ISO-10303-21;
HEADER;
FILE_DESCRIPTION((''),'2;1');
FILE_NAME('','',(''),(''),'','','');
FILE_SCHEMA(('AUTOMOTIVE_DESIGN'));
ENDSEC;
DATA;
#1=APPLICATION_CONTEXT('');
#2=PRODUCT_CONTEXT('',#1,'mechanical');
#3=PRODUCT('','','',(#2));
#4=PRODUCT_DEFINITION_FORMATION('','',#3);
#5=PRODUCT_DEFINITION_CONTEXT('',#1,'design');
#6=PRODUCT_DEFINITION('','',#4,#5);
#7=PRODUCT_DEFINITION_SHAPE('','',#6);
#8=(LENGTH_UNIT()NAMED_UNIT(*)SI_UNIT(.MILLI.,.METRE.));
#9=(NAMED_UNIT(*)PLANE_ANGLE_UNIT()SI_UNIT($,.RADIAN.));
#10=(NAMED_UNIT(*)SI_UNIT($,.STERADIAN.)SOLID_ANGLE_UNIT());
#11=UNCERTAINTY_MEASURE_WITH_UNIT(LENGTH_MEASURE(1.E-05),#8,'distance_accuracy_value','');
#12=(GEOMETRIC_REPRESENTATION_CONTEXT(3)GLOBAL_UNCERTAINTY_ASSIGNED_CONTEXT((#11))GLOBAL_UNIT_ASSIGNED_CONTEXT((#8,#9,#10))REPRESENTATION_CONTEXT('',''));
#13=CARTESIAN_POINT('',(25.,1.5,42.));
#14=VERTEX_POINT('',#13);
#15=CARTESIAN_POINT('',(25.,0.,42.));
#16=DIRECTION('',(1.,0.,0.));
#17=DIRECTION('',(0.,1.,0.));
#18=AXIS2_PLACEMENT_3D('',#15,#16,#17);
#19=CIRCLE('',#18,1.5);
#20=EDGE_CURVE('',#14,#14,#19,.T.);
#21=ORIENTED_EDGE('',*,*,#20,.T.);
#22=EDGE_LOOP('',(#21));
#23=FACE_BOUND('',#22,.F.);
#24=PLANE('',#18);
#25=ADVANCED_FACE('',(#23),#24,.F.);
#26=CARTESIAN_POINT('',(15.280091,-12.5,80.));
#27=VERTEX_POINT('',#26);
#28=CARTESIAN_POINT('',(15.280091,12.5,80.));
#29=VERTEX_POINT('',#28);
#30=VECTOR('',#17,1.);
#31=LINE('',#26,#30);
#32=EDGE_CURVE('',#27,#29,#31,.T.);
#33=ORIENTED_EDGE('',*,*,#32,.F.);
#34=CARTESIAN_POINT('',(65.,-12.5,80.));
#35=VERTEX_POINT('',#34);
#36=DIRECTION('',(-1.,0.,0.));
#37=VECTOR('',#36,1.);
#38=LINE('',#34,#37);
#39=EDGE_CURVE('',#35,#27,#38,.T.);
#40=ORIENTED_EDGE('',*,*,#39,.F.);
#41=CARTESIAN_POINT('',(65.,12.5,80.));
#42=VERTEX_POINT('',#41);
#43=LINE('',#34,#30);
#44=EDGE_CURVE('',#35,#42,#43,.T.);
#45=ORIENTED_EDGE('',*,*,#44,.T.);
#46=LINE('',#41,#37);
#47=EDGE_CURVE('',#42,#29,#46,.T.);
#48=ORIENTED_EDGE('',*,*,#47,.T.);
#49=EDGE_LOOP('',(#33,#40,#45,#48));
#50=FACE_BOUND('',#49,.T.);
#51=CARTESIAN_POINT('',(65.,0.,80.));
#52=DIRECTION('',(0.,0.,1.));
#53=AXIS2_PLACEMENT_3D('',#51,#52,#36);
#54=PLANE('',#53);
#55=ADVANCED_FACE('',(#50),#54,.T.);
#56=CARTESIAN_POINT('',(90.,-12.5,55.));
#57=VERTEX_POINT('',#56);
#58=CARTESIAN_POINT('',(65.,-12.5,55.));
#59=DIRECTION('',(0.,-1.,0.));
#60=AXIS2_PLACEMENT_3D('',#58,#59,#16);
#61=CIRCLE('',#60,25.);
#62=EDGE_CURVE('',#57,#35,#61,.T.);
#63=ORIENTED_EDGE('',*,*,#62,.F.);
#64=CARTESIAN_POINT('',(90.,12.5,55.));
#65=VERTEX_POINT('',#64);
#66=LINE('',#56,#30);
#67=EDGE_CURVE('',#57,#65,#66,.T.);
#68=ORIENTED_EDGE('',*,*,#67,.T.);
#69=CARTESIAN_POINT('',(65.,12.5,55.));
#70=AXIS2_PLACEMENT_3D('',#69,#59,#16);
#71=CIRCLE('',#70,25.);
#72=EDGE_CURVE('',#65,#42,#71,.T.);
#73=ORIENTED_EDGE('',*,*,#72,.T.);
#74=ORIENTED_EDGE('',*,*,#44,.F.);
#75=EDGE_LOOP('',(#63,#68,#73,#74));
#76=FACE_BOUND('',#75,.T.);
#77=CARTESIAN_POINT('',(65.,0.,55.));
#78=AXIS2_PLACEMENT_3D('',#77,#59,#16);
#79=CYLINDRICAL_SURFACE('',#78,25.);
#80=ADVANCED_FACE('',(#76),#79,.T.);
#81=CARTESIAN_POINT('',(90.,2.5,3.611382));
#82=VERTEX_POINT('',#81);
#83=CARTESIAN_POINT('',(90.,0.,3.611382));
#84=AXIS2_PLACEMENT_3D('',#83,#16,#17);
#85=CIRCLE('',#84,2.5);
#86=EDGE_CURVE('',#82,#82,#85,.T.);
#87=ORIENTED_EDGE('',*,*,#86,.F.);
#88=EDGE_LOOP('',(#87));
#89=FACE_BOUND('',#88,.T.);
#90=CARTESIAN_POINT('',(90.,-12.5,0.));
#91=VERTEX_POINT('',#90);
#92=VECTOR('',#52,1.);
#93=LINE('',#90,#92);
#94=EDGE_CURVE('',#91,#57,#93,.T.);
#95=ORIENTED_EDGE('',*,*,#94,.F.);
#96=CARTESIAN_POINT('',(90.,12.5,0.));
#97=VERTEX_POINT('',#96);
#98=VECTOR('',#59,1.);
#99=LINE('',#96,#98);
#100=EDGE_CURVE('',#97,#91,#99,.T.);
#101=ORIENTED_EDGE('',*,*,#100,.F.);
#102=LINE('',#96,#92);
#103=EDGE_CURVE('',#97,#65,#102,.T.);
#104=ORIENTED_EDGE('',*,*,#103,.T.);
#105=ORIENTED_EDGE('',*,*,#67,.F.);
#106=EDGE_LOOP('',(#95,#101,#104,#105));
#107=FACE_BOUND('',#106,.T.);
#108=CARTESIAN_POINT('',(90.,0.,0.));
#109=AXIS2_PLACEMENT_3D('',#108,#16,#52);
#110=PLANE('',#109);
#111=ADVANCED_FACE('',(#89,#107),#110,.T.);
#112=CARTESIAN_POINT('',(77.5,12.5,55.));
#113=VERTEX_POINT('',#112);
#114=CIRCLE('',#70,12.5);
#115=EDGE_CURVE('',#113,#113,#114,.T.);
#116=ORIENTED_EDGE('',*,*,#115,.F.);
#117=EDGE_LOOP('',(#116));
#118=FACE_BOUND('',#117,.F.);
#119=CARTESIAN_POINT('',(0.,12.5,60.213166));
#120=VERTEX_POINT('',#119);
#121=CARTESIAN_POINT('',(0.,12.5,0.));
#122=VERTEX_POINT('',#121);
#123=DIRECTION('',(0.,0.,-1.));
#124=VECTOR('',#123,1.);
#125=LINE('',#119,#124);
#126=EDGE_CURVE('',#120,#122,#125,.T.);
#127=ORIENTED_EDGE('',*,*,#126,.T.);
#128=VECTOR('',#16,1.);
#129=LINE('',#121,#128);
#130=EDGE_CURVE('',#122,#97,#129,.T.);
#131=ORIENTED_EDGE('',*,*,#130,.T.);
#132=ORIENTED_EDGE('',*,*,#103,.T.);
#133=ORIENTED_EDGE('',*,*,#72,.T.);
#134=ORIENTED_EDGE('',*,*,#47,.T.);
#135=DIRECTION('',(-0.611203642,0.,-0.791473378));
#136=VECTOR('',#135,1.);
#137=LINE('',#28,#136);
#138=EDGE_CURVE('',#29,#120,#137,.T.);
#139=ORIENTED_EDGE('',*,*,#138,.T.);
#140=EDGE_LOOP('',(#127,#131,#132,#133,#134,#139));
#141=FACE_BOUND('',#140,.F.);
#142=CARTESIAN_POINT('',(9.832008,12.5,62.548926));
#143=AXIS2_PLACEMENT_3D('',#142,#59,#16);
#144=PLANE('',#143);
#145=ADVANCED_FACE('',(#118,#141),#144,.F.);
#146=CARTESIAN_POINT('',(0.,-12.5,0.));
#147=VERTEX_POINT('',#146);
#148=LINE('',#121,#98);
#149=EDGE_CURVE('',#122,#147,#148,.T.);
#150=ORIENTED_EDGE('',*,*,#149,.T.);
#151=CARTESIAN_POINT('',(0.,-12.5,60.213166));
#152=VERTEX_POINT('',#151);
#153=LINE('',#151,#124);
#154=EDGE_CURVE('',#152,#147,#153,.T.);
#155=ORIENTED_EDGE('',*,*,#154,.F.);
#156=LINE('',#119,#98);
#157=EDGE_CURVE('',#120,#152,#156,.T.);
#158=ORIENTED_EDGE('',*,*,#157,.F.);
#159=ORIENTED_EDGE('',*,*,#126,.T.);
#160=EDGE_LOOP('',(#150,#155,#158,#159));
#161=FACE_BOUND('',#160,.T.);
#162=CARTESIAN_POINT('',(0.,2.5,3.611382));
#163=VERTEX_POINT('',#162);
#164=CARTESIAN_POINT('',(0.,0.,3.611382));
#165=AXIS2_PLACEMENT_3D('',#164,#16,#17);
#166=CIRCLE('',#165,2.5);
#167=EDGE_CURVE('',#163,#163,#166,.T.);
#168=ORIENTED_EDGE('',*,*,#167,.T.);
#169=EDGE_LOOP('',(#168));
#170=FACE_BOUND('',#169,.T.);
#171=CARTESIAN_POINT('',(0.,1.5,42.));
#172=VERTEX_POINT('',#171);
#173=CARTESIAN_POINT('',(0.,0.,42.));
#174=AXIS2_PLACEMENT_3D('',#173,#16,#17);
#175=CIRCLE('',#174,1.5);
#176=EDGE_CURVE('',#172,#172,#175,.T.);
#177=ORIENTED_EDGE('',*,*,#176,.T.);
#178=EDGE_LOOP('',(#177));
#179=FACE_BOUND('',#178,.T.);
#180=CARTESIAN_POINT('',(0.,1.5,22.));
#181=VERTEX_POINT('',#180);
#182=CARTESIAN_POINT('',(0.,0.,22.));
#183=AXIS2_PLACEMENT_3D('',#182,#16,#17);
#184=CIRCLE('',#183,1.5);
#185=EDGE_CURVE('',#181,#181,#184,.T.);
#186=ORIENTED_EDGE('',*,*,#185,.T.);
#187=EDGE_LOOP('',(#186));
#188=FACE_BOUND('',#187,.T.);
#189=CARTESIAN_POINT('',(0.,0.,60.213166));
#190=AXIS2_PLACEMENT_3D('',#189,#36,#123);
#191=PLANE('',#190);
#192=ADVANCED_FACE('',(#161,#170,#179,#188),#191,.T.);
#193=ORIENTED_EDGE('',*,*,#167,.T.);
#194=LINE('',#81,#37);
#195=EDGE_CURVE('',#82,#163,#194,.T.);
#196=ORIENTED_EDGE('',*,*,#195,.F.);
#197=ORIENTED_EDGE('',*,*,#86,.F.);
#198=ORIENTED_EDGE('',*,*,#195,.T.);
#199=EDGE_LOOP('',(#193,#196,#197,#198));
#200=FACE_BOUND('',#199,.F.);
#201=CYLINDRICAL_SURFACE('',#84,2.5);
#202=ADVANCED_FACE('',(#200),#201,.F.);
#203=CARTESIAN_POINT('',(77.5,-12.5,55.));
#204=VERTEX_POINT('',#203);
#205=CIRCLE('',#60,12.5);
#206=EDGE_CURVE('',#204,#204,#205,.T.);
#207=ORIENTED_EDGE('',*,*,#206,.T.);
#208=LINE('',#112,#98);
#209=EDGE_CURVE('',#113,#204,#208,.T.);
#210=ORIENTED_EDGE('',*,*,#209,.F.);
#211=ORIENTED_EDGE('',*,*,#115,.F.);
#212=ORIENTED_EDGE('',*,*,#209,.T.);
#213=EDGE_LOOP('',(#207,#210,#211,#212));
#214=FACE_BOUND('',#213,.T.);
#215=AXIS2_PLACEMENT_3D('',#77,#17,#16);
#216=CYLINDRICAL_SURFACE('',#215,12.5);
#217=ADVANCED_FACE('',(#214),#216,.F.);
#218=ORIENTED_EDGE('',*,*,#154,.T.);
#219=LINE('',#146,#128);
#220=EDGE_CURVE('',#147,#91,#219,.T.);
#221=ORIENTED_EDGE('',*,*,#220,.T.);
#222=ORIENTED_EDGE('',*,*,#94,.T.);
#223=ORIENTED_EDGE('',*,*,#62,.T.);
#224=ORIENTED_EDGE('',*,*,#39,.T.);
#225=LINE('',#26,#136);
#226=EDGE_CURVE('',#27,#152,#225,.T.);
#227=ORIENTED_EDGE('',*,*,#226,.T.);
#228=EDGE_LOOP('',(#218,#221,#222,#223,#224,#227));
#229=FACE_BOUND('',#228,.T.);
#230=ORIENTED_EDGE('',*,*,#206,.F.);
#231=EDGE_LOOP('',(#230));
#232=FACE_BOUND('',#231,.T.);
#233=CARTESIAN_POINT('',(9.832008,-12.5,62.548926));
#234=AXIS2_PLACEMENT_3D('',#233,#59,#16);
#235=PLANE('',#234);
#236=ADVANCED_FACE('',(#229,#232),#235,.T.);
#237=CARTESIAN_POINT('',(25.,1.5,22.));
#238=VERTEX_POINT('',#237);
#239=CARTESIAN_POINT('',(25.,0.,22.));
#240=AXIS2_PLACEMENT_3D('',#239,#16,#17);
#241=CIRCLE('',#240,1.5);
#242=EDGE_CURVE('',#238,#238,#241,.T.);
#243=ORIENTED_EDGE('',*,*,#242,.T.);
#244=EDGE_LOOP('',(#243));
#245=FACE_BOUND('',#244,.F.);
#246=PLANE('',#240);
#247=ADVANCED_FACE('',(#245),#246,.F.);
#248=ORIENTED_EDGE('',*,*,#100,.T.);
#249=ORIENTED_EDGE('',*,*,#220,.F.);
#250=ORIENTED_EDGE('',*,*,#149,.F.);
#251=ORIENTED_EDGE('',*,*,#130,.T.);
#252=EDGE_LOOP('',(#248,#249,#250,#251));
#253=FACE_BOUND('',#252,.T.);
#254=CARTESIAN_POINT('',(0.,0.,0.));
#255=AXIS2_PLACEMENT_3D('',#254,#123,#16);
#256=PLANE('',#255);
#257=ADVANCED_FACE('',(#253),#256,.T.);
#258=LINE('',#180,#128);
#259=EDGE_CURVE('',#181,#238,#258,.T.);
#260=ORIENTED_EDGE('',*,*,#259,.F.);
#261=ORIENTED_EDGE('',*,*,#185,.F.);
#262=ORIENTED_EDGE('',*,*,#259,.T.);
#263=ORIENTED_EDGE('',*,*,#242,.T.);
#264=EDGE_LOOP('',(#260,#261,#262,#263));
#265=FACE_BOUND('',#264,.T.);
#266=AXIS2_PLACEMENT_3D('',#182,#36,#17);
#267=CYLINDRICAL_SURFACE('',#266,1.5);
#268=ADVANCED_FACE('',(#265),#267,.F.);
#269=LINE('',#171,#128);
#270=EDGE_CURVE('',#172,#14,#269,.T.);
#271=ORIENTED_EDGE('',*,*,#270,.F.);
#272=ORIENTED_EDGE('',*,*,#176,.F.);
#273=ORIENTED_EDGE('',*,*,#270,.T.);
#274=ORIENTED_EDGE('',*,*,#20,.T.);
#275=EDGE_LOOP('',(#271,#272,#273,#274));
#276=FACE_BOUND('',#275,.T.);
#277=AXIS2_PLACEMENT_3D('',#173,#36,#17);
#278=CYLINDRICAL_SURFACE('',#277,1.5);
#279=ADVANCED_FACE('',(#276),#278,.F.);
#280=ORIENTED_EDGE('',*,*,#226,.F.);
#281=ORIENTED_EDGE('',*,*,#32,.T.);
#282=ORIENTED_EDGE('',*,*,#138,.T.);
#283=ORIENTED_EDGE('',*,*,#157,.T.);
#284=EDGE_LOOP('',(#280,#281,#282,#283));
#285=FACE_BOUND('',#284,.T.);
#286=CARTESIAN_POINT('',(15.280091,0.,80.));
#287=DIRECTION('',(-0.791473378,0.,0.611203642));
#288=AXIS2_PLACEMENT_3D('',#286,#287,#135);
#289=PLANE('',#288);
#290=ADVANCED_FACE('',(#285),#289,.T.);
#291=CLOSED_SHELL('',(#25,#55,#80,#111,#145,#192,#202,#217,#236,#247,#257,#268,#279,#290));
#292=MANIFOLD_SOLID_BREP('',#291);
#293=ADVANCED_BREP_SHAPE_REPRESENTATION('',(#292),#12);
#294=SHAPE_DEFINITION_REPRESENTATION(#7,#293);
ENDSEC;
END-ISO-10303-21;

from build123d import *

# Parameters (mm, degrees)
F0_R     = 12.5
F1_DEPTH = 12.5
F2_DEPTH = 12.501
F3_DEPTH = 12.5
F4_R     = 1.5
F5_DEPTH = 25
F6_R     = 2.5
F7_DEPTH = 90.001


# Not quite as in the source:
# - a feature names something its author has since deleted; it is built from what else it names


with BuildPart() as f1:
    # F0 (on Front) → F1 (new body, symmetric)
    with BuildSketch(Plane.XZ):
        Polygon((25.6665702909, 80), (15.280091039, 80), (0, 60.2131655427), (0, 40.0504879653), align=None)
        with BuildLine():
            Line((65, 80), (25.6665702909, 80))
            Line((25.6665702909, 80), (0, 40.0504879653))
            Line((0, 40.0504879653), (0, 0))
            Line((0, 0), (90, 0))
            Line((90, 0), (90, 55))
            ThreePointArc((90, 55), (82.6776695297, 72.6776695297), (65, 80))
        make_face()
        with Locations((65, 55)):
            Circle(F0_R, mode=Mode.SUBTRACT)
    extrude(amount=F1_DEPTH, both=True)

    # F0 (on Front) → F2 (cut, through all)
    with BuildSketch(Plane.XZ):
        Polygon((25.6665702909, 80), (15.280091039, 80), (0, 60.2131655427), (0, 40.0504879653), align=None)
        with BuildLine():
            Line((65, 80), (25.6665702909, 80))
            Line((25.6665702909, 80), (0, 40.0504879653))
            Line((0, 40.0504879653), (0, 0))
            Line((0, 0), (90, 0))
            Line((90, 0), (90, 55))
            ThreePointArc((90, 55), (82.6776695297, 72.6776695297), (65, 80))
        make_face()
        with Locations((65, 55)):
            Circle(F0_R, mode=Mode.SUBTRACT)
    extrude(amount=-F2_DEPTH, mode=Mode.SUBTRACT)

    # F0 (on Front) → F3 (join, symmetric)
    with BuildSketch(Plane.XZ):
        Polygon((25.6665702909, 80), (15.280091039, 80), (0, 60.2131655427), (0, 40.0504879653), align=None)
        with BuildLine():
            Line((65, 80), (25.6665702909, 80))
            Line((25.6665702909, 80), (0, 40.0504879653))
            Line((0, 40.0504879653), (0, 0))
            Line((0, 0), (90, 0))
            Line((90, 0), (90, 55))
            ThreePointArc((90, 55), (82.6776695297, 72.6776695297), (65, 80))
        make_face()
        with Locations((65, 55)):
            Circle(F0_R, mode=Mode.SUBTRACT)
    extrude(amount=F3_DEPTH, both=True)

    # F4 (on Right) → F5 (cut)
    with BuildSketch(Plane.YZ):
        with Locations((0, 22)):
            Circle(F4_R)
        with Locations((0, 42)):
            Circle(F4_R)
    extrude(amount=F5_DEPTH, mode=Mode.SUBTRACT)

    # F6 (on face) → F7 (cut, through all)
    with BuildSketch(Plane.YZ.offset(90)):
        with Locations((0, 3.611382097)):
            Circle(F6_R)
    extrude(amount=-F7_DEPTH, mode=Mode.SUBTRACT)


solid = f1.part
